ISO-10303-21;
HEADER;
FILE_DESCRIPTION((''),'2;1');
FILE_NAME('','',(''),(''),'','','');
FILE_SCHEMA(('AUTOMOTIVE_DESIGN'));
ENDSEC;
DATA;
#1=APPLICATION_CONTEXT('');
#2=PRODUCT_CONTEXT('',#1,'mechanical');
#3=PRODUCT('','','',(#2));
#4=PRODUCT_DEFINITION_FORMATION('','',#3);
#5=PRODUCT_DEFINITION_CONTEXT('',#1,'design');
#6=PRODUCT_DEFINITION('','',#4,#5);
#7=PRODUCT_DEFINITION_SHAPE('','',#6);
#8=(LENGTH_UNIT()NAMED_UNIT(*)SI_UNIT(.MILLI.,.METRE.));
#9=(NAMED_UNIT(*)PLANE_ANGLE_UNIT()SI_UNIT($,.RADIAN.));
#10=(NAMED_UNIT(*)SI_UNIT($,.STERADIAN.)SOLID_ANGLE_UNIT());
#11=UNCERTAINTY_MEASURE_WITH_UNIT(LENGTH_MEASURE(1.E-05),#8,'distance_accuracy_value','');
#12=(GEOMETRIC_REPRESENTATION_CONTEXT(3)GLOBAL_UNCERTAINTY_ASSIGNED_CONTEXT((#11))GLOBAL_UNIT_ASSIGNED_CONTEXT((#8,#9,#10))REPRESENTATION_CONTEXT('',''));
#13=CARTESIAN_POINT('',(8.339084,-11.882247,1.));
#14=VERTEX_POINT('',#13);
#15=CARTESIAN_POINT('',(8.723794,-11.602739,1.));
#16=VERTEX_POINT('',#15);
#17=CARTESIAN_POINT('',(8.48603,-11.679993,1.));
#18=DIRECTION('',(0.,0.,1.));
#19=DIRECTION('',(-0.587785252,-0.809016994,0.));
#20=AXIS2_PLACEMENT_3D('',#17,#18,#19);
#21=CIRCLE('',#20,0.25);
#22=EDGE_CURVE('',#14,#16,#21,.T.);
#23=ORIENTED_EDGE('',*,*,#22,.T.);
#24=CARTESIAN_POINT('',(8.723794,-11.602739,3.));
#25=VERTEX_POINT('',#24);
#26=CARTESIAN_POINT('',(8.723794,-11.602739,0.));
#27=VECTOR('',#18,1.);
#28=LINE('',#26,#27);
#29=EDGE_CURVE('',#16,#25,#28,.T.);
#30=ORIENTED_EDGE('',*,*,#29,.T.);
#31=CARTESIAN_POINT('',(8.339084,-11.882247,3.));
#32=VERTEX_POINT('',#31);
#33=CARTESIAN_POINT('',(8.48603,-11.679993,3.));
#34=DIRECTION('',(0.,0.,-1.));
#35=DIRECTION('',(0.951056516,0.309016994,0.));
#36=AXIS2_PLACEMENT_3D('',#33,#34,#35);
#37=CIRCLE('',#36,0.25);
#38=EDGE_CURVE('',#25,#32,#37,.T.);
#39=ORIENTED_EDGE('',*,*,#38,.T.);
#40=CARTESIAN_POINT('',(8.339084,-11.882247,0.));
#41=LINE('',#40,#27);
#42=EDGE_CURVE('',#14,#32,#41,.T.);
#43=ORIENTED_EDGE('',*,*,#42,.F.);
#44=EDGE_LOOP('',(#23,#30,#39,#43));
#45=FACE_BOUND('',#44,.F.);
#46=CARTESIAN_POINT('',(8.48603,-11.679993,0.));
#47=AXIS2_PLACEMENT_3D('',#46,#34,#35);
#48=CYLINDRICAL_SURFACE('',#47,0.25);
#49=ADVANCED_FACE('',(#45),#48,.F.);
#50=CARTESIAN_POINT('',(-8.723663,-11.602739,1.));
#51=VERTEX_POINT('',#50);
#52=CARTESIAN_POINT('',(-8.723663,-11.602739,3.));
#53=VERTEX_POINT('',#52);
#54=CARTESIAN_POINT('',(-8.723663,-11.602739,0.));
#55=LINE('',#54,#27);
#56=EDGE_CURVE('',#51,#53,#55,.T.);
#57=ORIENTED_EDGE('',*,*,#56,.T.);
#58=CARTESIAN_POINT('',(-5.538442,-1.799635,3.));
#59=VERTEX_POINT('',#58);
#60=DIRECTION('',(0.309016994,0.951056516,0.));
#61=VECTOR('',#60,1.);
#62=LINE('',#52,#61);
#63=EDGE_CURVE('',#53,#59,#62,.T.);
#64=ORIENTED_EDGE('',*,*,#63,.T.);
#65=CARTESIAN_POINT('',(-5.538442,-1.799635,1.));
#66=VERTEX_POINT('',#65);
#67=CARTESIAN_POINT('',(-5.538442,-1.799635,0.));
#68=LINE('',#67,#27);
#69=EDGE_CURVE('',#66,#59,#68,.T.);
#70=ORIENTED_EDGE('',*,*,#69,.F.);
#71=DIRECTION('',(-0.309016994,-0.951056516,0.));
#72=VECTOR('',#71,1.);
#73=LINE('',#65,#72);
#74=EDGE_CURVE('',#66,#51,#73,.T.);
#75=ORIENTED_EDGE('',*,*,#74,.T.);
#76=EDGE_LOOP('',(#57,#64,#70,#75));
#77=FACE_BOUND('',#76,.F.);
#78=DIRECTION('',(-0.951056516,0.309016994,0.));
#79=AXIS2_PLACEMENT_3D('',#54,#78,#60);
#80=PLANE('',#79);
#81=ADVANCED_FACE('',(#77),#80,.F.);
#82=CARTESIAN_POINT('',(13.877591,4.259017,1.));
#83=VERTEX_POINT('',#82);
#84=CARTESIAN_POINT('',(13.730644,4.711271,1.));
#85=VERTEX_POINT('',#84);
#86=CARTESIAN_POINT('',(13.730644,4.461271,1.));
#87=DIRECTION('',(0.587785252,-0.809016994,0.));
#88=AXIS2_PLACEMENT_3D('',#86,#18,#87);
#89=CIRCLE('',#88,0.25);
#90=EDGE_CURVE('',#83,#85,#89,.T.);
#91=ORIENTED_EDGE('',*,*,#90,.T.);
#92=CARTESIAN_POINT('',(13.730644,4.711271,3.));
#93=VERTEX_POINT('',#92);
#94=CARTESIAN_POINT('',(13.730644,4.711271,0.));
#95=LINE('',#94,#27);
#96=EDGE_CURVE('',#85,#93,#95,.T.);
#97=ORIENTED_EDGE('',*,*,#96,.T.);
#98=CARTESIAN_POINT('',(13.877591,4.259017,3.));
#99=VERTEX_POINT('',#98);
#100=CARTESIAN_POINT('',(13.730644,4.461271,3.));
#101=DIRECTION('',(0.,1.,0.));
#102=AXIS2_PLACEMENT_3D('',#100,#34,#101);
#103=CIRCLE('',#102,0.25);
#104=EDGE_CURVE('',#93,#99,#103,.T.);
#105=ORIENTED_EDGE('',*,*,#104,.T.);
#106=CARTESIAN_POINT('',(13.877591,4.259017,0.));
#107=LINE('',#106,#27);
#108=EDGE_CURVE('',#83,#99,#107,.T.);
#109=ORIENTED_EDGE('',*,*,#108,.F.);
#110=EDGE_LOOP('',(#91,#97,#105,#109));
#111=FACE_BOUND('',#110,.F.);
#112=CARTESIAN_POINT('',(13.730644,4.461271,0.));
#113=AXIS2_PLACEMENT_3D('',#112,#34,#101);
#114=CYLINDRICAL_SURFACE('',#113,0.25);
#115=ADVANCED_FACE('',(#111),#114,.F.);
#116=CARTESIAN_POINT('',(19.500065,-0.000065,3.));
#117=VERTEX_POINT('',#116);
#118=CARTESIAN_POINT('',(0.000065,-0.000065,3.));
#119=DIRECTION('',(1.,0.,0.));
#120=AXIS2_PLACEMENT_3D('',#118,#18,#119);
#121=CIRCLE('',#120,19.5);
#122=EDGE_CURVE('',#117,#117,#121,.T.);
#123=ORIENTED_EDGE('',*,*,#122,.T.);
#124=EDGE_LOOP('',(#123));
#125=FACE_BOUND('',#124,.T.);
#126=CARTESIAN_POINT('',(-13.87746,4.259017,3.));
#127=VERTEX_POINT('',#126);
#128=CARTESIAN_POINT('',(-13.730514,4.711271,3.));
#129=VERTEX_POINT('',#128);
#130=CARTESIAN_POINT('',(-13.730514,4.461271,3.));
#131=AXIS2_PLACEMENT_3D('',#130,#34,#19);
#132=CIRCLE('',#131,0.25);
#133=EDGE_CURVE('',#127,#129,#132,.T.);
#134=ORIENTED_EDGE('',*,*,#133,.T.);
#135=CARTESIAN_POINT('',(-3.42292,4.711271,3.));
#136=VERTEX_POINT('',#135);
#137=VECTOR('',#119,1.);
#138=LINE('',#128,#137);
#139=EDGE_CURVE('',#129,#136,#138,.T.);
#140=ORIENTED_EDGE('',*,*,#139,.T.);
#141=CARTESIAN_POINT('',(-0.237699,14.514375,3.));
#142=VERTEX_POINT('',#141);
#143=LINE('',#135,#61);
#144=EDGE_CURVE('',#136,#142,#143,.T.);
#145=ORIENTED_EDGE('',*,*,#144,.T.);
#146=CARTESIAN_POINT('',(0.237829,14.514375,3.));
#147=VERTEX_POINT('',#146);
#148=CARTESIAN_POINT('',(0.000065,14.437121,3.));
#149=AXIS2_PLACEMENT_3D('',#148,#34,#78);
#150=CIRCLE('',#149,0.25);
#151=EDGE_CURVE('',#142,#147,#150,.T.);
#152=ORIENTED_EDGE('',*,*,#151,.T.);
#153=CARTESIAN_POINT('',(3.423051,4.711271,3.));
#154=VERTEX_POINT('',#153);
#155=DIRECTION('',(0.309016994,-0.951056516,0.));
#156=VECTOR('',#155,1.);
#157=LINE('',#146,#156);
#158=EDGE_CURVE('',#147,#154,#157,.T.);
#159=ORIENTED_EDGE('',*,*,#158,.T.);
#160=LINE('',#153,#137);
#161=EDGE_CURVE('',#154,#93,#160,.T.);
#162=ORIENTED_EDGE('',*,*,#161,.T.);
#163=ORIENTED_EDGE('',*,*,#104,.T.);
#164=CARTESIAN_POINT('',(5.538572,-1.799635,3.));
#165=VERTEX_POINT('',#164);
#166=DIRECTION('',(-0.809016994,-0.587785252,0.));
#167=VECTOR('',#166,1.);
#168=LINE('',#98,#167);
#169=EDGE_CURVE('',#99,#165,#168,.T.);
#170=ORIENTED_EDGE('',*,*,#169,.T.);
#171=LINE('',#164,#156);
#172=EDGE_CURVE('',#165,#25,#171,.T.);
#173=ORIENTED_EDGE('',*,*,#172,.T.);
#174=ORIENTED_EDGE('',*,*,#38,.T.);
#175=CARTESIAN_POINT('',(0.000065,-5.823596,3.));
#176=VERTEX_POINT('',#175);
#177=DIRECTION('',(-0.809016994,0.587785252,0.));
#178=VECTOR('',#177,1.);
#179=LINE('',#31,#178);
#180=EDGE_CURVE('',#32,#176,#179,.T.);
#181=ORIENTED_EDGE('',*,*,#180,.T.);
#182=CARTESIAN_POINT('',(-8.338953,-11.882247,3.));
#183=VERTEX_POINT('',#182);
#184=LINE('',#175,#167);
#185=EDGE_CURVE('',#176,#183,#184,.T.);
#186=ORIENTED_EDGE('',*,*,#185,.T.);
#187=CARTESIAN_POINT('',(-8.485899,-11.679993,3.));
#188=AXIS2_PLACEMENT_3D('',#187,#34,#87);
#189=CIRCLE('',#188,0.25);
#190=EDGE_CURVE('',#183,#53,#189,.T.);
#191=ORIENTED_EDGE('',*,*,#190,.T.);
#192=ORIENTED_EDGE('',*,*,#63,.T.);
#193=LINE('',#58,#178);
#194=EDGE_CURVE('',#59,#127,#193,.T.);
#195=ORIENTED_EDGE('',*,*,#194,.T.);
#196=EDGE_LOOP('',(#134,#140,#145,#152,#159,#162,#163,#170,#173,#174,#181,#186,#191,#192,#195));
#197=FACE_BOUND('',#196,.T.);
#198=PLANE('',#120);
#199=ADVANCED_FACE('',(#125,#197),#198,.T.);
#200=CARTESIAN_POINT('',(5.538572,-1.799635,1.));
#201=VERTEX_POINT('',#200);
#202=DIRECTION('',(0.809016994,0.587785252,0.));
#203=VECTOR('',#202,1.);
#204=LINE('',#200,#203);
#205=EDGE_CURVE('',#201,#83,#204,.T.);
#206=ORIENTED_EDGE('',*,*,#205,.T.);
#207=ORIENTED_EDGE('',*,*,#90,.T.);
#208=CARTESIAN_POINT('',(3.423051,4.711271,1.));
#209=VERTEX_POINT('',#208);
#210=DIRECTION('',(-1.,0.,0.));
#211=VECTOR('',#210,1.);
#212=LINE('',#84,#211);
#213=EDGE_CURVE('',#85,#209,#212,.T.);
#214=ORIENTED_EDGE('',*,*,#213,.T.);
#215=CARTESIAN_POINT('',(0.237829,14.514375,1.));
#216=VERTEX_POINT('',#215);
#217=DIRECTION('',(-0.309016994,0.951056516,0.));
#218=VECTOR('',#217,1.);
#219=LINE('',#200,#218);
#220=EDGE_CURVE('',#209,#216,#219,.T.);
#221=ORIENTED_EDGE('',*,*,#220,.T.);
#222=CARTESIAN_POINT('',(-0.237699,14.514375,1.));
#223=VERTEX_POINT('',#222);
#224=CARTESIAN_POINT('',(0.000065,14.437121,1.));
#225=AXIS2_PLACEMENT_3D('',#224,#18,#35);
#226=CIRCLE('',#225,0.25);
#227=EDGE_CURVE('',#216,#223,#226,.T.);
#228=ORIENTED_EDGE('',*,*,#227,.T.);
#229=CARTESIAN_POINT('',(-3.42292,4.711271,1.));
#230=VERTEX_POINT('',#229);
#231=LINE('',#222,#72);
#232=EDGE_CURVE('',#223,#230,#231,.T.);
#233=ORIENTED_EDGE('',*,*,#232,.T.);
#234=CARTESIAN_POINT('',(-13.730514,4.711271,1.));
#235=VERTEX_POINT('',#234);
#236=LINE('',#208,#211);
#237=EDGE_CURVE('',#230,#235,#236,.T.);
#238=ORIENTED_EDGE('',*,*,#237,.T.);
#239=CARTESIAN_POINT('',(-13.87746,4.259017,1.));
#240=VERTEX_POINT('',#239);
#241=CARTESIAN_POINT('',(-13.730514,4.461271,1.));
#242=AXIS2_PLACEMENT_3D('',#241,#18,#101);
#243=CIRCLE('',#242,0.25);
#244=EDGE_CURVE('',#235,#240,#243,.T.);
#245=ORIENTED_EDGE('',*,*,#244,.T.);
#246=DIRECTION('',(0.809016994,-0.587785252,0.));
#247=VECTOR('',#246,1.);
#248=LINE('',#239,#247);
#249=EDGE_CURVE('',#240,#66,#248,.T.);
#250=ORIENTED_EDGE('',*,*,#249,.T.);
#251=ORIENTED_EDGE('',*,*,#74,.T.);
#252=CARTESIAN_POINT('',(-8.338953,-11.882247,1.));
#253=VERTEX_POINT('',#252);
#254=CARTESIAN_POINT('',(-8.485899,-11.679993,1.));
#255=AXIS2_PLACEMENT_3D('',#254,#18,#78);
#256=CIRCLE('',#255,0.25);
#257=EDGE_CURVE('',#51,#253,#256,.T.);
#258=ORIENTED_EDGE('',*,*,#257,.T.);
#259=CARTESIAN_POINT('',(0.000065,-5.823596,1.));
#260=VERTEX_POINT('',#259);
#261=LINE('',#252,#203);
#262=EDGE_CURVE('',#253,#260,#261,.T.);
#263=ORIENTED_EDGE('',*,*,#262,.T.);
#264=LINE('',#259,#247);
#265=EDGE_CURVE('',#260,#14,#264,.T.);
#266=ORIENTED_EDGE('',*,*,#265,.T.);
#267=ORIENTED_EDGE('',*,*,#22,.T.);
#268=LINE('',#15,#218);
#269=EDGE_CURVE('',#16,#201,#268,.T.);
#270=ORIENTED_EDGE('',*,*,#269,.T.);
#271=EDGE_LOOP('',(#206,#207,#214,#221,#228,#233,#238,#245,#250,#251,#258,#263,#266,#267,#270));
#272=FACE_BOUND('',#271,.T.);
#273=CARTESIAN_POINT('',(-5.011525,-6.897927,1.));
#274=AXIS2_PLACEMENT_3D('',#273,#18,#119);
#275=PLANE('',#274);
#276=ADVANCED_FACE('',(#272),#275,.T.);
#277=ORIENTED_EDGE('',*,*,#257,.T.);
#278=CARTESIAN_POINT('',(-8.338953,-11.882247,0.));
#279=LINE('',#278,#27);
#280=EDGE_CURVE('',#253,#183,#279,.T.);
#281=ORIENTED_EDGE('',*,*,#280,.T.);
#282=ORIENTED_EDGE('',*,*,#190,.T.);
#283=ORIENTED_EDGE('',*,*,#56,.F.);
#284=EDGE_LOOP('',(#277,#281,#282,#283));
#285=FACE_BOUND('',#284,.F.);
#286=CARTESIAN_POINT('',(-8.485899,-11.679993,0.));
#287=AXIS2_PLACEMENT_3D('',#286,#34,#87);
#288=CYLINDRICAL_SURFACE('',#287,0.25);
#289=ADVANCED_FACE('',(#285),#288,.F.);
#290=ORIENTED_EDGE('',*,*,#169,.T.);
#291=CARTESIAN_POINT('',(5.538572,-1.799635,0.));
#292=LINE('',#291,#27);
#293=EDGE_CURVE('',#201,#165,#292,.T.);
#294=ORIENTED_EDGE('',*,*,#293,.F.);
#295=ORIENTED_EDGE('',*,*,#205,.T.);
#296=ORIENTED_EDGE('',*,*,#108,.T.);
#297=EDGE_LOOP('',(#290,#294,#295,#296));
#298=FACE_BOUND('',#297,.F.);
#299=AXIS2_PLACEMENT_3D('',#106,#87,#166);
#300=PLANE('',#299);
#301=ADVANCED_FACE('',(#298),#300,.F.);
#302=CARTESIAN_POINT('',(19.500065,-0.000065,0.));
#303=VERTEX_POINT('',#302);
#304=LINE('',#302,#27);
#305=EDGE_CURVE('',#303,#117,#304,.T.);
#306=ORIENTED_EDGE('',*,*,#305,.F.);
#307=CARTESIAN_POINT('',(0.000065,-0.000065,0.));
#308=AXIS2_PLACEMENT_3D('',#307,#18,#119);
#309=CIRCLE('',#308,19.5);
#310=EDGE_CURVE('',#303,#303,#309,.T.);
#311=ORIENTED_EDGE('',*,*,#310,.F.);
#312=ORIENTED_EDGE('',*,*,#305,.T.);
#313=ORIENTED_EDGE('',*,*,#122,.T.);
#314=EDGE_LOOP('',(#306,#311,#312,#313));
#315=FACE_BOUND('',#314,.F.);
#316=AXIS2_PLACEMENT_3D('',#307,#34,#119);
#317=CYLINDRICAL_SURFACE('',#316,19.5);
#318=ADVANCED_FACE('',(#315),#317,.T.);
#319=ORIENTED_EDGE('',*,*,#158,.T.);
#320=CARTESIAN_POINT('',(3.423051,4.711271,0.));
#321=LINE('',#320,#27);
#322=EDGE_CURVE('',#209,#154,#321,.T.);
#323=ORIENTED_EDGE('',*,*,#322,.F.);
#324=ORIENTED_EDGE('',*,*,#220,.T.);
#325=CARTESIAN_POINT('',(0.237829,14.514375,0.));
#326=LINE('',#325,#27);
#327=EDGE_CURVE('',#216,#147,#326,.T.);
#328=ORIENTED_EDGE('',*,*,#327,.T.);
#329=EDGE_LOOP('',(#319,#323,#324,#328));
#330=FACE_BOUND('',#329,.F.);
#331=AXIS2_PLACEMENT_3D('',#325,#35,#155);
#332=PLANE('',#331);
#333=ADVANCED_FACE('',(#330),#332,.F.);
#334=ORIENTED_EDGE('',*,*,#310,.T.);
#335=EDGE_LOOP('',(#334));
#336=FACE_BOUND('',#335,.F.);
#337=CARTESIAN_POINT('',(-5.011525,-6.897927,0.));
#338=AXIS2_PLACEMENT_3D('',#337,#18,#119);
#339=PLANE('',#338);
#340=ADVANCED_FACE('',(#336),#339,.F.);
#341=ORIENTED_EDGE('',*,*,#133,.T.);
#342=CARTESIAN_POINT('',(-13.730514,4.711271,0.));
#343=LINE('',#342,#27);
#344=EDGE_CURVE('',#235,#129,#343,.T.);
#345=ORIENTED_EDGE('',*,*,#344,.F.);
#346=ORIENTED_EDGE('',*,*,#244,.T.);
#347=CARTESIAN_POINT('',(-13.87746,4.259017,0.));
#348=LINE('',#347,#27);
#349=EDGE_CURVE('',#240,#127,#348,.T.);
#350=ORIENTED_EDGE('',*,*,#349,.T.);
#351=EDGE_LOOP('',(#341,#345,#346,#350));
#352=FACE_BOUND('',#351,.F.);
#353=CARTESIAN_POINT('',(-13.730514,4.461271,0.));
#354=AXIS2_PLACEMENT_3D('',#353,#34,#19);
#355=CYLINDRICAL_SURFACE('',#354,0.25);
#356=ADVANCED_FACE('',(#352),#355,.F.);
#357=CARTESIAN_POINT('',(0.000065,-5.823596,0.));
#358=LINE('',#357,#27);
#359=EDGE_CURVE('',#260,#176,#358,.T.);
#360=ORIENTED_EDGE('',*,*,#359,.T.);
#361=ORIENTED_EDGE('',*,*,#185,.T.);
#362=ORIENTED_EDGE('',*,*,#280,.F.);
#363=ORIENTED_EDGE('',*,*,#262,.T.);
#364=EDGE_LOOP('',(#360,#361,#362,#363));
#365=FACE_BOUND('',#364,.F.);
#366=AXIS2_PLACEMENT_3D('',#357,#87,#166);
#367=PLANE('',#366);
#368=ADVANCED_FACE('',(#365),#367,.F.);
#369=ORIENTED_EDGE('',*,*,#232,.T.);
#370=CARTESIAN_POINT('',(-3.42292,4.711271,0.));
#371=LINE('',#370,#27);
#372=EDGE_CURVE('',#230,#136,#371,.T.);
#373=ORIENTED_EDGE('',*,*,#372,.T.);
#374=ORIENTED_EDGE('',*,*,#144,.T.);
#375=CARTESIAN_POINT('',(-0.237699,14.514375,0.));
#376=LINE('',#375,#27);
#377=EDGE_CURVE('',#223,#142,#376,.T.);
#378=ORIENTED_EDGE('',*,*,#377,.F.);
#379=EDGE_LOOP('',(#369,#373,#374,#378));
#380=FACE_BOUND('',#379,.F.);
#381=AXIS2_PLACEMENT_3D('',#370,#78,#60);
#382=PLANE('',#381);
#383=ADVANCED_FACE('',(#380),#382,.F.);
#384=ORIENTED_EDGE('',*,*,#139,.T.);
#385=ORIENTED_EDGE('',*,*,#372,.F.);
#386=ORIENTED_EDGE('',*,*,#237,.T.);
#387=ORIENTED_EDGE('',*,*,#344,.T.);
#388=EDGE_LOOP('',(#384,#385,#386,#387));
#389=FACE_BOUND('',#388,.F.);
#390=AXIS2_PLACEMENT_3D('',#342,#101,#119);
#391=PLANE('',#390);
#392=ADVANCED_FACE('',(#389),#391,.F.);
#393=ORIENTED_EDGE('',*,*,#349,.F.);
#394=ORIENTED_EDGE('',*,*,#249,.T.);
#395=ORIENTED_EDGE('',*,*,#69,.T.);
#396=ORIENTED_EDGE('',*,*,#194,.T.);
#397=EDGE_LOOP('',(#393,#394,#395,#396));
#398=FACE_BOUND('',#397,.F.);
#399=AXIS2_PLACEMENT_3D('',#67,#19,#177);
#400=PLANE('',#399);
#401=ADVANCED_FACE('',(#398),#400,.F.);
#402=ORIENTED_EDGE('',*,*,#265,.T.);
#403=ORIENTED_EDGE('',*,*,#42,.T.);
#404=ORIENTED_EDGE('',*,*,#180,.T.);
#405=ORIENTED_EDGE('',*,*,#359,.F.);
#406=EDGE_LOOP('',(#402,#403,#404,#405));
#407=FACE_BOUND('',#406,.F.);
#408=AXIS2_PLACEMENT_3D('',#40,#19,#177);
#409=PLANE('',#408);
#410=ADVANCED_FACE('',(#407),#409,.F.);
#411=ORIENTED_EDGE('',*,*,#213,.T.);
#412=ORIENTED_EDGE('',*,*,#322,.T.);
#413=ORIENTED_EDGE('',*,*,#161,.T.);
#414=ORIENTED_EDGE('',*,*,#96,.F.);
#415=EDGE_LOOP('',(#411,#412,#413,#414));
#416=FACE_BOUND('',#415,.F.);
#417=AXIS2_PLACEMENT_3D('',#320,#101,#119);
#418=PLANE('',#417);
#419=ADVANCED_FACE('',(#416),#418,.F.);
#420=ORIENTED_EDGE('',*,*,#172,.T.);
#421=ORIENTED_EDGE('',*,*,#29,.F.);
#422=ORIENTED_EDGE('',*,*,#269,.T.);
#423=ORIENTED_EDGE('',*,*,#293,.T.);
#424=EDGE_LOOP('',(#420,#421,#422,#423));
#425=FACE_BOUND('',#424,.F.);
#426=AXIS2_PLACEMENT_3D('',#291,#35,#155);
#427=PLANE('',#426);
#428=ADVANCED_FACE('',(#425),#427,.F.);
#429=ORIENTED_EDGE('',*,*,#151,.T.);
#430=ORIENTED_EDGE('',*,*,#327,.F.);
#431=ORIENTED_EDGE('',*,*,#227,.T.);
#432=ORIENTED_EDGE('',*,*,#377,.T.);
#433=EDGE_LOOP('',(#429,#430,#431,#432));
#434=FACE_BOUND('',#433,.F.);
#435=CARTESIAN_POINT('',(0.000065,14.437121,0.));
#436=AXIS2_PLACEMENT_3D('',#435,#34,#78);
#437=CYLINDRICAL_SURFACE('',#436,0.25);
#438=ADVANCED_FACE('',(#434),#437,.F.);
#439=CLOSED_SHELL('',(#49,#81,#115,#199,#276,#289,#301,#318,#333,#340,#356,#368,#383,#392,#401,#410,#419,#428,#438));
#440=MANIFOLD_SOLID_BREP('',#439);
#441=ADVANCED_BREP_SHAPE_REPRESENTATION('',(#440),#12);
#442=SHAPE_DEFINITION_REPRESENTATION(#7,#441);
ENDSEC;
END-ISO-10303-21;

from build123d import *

# Parameters (mm, degrees)
F0_R     = 19.5
F1_DEPTH = 3
F2_DEPTH = 1


# Not quite as in the source:
# - a feature names something its author has since deleted; it is built from what else it names


with BuildPart() as f1:
    # F0 (on Top) → F1 (new body)
    with BuildSketch(Plane.XY):
        with Locations((6.52368e-05, -6.45803e-05)):
            Circle(F0_R)
        with BuildLine():
            ThreePointArc((-8.3389530288, -11.8822470528), (-8.632845655, -11.8822470528), (-8.723663471, -11.6027385556))
            Line((-8.723663471, -11.6027385556), (-5.5384419263, -1.7996346453))
            Line((-5.5384419263, -1.7996346453), (-13.877460192, 4.2590167665))
            ThreePointArc((-13.877460192, 4.2590167665), (-13.968278008, 4.5385252636), (-13.7305138789, 4.7112710151))
            Line((-13.7305138789, 4.7112710151), (-3.4229204369, 4.7112710151))
            Line((-3.4229204369, 4.7112710151), (-0.2376988922, 14.5143749254))
            ThreePointArc((-0.2376988922, 14.5143749254), (6.52368e-05, 14.6871206768), (0.2378293659, 14.5143749254))
            Line((0.2378293659, 14.5143749254), (3.4230509106, 4.7112710151))
            Line((3.4230509106, 4.7112710151), (13.7306443525, 4.7112710151))
            ThreePointArc((13.7306443525, 4.7112710151), (13.9684084816, 4.5385252637), (13.8775906656, 4.2590167665))
            Line((13.8775906656, 4.2590167665), (5.5385724, -1.7996346453))
            Line((5.5385724, -1.7996346453), (8.7237939446, -11.6027385556))
            ThreePointArc((8.7237939446, -11.6027385556), (8.6329761286, -11.8822470528), (8.3390835025, -11.8822470528))
            Line((8.3390835025, -11.8822470528), (6.52368e-05, -5.823595641))
            Line((6.52368e-05, -5.823595641), (-8.3389530288, -11.8822470528))
        make_face(mode=Mode.SUBTRACT)
    extrude(amount=F1_DEPTH)

    # F0 (on Top) → F2 (join)
    with BuildSketch(Plane.XY):
        with BuildLine():
            Line((-5.5384419263, -1.7996346453), (-8.723663471, -11.6027385556))
            ThreePointArc((-8.723663471, -11.6027385556), (-8.632845655, -11.8822470528), (-8.3389530288, -11.8822470528))
            Line((-8.3389530288, -11.8822470528), (6.52368e-05, -5.823595641))
            Line((6.52368e-05, -5.823595641), (-5.5384419263, -1.7996346453))
        make_face()
        with BuildLine():
            Line((-13.877460192, 4.2590167665), (-5.5384419263, -1.7996346453))
            Line((-5.5384419263, -1.7996346453), (-3.4229204369, 4.7112710151))
            Line((-3.4229204369, 4.7112710151), (-13.7305138789, 4.7112710151))
            ThreePointArc((-13.7305138789, 4.7112710151), (-13.968278008, 4.5385252636), (-13.877460192, 4.2590167665))
        make_face()
        Polygon((-3.4229204369, 4.7112710151), (-5.5384419263, -1.7996346453), (6.52368e-05, -5.823595641), (5.5385724, -1.7996346453), (3.4230509106, 4.7112710151), align=None)
        with BuildLine():
            Line((-0.2376988922, 14.5143749254), (-3.4229204369, 4.7112710151))
            Line((-3.4229204369, 4.7112710151), (3.4230509106, 4.7112710151))
            Line((3.4230509106, 4.7112710151), (0.2378293659, 14.5143749254))
            ThreePointArc((0.2378293659, 14.5143749254), (6.52368e-05, 14.6871206768), (-0.2376988922, 14.5143749254))
        make_face()
        with BuildLine():
            Line((5.5385724, -1.7996346453), (6.52368e-05, -5.823595641))
            Line((6.52368e-05, -5.823595641), (8.3390835025, -11.8822470528))
            ThreePointArc((8.3390835025, -11.8822470528), (8.6329761286, -11.8822470528), (8.7237939446, -11.6027385556))
            Line((8.7237939446, -11.6027385556), (5.5385724, -1.7996346453))
        make_face()
        with BuildLine():
            Line((13.7306443525, 4.7112710151), (3.4230509106, 4.7112710151))
            Line((3.4230509106, 4.7112710151), (5.5385724, -1.7996346453))
            Line((5.5385724, -1.7996346453), (13.8775906656, 4.2590167665))
            ThreePointArc((13.8775906656, 4.2590167665), (13.9684084816, 4.5385252637), (13.7306443525, 4.7112710151))
        make_face()
    extrude(amount=F2_DEPTH)


solid = f1.part
